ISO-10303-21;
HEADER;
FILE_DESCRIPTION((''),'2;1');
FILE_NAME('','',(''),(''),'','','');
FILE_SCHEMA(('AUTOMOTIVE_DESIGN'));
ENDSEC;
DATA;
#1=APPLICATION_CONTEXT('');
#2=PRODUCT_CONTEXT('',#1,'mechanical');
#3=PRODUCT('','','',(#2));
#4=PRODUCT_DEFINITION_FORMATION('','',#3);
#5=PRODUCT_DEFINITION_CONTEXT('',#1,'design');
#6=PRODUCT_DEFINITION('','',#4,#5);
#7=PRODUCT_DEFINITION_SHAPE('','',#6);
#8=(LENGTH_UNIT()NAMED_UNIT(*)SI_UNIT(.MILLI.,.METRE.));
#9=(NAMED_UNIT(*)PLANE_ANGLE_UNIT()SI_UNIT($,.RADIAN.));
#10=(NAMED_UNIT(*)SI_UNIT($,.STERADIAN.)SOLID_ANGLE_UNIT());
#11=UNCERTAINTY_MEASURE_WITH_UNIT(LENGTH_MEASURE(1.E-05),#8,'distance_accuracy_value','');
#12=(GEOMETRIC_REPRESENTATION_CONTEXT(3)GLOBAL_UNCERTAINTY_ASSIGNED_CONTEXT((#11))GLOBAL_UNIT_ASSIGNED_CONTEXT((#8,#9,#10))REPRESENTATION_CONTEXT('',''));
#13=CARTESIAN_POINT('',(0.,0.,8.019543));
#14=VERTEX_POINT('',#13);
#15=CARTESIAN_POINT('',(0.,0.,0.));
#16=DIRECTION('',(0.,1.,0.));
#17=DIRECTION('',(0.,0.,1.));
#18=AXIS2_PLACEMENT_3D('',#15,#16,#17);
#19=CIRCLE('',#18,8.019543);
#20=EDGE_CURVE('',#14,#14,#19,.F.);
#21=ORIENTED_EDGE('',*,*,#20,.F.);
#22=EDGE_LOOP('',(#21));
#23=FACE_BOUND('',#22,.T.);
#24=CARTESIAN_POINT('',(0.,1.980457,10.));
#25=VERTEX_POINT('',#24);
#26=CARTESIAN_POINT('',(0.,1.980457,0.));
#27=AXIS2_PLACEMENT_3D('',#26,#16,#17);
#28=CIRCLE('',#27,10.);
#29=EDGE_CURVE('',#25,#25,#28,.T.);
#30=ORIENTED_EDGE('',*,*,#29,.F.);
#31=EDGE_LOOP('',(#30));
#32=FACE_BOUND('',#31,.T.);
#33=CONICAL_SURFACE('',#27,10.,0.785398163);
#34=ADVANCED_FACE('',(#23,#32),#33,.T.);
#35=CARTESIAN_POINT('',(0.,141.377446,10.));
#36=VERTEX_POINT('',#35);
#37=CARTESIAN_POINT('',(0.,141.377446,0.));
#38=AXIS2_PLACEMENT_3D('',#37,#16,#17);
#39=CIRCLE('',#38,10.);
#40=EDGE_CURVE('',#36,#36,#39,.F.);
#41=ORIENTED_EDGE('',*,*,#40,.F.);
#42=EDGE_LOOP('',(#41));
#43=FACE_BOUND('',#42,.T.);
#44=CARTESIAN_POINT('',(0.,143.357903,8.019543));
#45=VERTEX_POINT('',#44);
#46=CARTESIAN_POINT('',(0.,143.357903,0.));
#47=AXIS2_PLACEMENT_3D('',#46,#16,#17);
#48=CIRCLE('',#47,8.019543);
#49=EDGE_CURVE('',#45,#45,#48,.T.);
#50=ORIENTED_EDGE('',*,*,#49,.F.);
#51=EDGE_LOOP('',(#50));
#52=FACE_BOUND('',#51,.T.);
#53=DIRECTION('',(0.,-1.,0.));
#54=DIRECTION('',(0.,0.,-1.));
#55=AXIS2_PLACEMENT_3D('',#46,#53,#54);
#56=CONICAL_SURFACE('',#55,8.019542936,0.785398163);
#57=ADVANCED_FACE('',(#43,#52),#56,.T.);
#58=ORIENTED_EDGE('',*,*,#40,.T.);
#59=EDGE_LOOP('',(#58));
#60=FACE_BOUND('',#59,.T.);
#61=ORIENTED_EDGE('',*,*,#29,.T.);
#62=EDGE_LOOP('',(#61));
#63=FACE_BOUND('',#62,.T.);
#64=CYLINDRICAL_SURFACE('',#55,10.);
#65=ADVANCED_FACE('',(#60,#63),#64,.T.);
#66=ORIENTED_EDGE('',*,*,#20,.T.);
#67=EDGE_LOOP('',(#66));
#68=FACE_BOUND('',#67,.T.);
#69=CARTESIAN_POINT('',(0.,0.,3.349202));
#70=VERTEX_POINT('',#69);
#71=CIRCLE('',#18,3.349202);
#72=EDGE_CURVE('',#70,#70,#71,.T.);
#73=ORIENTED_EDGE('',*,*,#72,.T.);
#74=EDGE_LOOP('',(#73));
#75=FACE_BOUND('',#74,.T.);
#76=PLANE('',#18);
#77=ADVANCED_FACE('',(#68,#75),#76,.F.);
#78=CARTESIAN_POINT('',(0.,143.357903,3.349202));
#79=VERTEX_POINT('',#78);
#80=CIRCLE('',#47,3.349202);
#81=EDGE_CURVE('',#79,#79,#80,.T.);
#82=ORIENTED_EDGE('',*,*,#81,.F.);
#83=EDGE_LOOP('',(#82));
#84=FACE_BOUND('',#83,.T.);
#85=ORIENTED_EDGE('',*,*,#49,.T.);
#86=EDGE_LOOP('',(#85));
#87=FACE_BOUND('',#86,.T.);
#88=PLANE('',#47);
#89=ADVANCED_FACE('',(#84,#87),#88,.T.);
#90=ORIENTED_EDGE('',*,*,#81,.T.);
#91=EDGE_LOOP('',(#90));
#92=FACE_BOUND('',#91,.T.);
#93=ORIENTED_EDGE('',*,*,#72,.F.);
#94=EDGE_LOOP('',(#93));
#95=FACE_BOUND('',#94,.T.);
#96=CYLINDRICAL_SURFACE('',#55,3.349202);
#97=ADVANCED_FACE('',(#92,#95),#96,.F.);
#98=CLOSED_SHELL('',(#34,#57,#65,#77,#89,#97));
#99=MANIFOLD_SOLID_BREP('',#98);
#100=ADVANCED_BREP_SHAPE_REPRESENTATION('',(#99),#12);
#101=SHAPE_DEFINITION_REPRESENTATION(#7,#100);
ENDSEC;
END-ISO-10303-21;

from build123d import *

# Parameters (mm, degrees)
SKETCH1_R           = 10
BOSS_EXTRUDE1_DEPTH = 143.357903294
SKETCH2_R           = 3.349201616
CUT_EXTRUDE1_DEPTH  = 145.053769256
CHAMFER1_SIZE       = 1.980457064


with BuildPart() as part:
    # Sketch1 → Boss-Extrude1 (new body)
    with BuildSketch(Plane(origin=(0, 0, 0), x_dir=(1, 0, 0), z_dir=(0, 1, 0))):
        Circle(SKETCH1_R)
    extrude(amount=BOSS_EXTRUDE1_DEPTH)

    # Sketch2 → Cut-Extrude1 (cut, through all)
    with BuildSketch(Plane(origin=(0, 0, 0), x_dir=(1, 0, 0), z_dir=(0, 1, 0))):
        Circle(SKETCH2_R)
    extrude(amount=CUT_EXTRUDE1_DEPTH, mode=Mode.SUBTRACT)

    # Chamfer1
    chamfer1_edges = [part.edges().sort_by_distance(p)[0] for p in [
        (-10, 143.357903294, 0),
        (-10, 0, 0),
    ]]
    chamfer(chamfer1_edges, length=CHAMFER1_SIZE)


solid = part.part
